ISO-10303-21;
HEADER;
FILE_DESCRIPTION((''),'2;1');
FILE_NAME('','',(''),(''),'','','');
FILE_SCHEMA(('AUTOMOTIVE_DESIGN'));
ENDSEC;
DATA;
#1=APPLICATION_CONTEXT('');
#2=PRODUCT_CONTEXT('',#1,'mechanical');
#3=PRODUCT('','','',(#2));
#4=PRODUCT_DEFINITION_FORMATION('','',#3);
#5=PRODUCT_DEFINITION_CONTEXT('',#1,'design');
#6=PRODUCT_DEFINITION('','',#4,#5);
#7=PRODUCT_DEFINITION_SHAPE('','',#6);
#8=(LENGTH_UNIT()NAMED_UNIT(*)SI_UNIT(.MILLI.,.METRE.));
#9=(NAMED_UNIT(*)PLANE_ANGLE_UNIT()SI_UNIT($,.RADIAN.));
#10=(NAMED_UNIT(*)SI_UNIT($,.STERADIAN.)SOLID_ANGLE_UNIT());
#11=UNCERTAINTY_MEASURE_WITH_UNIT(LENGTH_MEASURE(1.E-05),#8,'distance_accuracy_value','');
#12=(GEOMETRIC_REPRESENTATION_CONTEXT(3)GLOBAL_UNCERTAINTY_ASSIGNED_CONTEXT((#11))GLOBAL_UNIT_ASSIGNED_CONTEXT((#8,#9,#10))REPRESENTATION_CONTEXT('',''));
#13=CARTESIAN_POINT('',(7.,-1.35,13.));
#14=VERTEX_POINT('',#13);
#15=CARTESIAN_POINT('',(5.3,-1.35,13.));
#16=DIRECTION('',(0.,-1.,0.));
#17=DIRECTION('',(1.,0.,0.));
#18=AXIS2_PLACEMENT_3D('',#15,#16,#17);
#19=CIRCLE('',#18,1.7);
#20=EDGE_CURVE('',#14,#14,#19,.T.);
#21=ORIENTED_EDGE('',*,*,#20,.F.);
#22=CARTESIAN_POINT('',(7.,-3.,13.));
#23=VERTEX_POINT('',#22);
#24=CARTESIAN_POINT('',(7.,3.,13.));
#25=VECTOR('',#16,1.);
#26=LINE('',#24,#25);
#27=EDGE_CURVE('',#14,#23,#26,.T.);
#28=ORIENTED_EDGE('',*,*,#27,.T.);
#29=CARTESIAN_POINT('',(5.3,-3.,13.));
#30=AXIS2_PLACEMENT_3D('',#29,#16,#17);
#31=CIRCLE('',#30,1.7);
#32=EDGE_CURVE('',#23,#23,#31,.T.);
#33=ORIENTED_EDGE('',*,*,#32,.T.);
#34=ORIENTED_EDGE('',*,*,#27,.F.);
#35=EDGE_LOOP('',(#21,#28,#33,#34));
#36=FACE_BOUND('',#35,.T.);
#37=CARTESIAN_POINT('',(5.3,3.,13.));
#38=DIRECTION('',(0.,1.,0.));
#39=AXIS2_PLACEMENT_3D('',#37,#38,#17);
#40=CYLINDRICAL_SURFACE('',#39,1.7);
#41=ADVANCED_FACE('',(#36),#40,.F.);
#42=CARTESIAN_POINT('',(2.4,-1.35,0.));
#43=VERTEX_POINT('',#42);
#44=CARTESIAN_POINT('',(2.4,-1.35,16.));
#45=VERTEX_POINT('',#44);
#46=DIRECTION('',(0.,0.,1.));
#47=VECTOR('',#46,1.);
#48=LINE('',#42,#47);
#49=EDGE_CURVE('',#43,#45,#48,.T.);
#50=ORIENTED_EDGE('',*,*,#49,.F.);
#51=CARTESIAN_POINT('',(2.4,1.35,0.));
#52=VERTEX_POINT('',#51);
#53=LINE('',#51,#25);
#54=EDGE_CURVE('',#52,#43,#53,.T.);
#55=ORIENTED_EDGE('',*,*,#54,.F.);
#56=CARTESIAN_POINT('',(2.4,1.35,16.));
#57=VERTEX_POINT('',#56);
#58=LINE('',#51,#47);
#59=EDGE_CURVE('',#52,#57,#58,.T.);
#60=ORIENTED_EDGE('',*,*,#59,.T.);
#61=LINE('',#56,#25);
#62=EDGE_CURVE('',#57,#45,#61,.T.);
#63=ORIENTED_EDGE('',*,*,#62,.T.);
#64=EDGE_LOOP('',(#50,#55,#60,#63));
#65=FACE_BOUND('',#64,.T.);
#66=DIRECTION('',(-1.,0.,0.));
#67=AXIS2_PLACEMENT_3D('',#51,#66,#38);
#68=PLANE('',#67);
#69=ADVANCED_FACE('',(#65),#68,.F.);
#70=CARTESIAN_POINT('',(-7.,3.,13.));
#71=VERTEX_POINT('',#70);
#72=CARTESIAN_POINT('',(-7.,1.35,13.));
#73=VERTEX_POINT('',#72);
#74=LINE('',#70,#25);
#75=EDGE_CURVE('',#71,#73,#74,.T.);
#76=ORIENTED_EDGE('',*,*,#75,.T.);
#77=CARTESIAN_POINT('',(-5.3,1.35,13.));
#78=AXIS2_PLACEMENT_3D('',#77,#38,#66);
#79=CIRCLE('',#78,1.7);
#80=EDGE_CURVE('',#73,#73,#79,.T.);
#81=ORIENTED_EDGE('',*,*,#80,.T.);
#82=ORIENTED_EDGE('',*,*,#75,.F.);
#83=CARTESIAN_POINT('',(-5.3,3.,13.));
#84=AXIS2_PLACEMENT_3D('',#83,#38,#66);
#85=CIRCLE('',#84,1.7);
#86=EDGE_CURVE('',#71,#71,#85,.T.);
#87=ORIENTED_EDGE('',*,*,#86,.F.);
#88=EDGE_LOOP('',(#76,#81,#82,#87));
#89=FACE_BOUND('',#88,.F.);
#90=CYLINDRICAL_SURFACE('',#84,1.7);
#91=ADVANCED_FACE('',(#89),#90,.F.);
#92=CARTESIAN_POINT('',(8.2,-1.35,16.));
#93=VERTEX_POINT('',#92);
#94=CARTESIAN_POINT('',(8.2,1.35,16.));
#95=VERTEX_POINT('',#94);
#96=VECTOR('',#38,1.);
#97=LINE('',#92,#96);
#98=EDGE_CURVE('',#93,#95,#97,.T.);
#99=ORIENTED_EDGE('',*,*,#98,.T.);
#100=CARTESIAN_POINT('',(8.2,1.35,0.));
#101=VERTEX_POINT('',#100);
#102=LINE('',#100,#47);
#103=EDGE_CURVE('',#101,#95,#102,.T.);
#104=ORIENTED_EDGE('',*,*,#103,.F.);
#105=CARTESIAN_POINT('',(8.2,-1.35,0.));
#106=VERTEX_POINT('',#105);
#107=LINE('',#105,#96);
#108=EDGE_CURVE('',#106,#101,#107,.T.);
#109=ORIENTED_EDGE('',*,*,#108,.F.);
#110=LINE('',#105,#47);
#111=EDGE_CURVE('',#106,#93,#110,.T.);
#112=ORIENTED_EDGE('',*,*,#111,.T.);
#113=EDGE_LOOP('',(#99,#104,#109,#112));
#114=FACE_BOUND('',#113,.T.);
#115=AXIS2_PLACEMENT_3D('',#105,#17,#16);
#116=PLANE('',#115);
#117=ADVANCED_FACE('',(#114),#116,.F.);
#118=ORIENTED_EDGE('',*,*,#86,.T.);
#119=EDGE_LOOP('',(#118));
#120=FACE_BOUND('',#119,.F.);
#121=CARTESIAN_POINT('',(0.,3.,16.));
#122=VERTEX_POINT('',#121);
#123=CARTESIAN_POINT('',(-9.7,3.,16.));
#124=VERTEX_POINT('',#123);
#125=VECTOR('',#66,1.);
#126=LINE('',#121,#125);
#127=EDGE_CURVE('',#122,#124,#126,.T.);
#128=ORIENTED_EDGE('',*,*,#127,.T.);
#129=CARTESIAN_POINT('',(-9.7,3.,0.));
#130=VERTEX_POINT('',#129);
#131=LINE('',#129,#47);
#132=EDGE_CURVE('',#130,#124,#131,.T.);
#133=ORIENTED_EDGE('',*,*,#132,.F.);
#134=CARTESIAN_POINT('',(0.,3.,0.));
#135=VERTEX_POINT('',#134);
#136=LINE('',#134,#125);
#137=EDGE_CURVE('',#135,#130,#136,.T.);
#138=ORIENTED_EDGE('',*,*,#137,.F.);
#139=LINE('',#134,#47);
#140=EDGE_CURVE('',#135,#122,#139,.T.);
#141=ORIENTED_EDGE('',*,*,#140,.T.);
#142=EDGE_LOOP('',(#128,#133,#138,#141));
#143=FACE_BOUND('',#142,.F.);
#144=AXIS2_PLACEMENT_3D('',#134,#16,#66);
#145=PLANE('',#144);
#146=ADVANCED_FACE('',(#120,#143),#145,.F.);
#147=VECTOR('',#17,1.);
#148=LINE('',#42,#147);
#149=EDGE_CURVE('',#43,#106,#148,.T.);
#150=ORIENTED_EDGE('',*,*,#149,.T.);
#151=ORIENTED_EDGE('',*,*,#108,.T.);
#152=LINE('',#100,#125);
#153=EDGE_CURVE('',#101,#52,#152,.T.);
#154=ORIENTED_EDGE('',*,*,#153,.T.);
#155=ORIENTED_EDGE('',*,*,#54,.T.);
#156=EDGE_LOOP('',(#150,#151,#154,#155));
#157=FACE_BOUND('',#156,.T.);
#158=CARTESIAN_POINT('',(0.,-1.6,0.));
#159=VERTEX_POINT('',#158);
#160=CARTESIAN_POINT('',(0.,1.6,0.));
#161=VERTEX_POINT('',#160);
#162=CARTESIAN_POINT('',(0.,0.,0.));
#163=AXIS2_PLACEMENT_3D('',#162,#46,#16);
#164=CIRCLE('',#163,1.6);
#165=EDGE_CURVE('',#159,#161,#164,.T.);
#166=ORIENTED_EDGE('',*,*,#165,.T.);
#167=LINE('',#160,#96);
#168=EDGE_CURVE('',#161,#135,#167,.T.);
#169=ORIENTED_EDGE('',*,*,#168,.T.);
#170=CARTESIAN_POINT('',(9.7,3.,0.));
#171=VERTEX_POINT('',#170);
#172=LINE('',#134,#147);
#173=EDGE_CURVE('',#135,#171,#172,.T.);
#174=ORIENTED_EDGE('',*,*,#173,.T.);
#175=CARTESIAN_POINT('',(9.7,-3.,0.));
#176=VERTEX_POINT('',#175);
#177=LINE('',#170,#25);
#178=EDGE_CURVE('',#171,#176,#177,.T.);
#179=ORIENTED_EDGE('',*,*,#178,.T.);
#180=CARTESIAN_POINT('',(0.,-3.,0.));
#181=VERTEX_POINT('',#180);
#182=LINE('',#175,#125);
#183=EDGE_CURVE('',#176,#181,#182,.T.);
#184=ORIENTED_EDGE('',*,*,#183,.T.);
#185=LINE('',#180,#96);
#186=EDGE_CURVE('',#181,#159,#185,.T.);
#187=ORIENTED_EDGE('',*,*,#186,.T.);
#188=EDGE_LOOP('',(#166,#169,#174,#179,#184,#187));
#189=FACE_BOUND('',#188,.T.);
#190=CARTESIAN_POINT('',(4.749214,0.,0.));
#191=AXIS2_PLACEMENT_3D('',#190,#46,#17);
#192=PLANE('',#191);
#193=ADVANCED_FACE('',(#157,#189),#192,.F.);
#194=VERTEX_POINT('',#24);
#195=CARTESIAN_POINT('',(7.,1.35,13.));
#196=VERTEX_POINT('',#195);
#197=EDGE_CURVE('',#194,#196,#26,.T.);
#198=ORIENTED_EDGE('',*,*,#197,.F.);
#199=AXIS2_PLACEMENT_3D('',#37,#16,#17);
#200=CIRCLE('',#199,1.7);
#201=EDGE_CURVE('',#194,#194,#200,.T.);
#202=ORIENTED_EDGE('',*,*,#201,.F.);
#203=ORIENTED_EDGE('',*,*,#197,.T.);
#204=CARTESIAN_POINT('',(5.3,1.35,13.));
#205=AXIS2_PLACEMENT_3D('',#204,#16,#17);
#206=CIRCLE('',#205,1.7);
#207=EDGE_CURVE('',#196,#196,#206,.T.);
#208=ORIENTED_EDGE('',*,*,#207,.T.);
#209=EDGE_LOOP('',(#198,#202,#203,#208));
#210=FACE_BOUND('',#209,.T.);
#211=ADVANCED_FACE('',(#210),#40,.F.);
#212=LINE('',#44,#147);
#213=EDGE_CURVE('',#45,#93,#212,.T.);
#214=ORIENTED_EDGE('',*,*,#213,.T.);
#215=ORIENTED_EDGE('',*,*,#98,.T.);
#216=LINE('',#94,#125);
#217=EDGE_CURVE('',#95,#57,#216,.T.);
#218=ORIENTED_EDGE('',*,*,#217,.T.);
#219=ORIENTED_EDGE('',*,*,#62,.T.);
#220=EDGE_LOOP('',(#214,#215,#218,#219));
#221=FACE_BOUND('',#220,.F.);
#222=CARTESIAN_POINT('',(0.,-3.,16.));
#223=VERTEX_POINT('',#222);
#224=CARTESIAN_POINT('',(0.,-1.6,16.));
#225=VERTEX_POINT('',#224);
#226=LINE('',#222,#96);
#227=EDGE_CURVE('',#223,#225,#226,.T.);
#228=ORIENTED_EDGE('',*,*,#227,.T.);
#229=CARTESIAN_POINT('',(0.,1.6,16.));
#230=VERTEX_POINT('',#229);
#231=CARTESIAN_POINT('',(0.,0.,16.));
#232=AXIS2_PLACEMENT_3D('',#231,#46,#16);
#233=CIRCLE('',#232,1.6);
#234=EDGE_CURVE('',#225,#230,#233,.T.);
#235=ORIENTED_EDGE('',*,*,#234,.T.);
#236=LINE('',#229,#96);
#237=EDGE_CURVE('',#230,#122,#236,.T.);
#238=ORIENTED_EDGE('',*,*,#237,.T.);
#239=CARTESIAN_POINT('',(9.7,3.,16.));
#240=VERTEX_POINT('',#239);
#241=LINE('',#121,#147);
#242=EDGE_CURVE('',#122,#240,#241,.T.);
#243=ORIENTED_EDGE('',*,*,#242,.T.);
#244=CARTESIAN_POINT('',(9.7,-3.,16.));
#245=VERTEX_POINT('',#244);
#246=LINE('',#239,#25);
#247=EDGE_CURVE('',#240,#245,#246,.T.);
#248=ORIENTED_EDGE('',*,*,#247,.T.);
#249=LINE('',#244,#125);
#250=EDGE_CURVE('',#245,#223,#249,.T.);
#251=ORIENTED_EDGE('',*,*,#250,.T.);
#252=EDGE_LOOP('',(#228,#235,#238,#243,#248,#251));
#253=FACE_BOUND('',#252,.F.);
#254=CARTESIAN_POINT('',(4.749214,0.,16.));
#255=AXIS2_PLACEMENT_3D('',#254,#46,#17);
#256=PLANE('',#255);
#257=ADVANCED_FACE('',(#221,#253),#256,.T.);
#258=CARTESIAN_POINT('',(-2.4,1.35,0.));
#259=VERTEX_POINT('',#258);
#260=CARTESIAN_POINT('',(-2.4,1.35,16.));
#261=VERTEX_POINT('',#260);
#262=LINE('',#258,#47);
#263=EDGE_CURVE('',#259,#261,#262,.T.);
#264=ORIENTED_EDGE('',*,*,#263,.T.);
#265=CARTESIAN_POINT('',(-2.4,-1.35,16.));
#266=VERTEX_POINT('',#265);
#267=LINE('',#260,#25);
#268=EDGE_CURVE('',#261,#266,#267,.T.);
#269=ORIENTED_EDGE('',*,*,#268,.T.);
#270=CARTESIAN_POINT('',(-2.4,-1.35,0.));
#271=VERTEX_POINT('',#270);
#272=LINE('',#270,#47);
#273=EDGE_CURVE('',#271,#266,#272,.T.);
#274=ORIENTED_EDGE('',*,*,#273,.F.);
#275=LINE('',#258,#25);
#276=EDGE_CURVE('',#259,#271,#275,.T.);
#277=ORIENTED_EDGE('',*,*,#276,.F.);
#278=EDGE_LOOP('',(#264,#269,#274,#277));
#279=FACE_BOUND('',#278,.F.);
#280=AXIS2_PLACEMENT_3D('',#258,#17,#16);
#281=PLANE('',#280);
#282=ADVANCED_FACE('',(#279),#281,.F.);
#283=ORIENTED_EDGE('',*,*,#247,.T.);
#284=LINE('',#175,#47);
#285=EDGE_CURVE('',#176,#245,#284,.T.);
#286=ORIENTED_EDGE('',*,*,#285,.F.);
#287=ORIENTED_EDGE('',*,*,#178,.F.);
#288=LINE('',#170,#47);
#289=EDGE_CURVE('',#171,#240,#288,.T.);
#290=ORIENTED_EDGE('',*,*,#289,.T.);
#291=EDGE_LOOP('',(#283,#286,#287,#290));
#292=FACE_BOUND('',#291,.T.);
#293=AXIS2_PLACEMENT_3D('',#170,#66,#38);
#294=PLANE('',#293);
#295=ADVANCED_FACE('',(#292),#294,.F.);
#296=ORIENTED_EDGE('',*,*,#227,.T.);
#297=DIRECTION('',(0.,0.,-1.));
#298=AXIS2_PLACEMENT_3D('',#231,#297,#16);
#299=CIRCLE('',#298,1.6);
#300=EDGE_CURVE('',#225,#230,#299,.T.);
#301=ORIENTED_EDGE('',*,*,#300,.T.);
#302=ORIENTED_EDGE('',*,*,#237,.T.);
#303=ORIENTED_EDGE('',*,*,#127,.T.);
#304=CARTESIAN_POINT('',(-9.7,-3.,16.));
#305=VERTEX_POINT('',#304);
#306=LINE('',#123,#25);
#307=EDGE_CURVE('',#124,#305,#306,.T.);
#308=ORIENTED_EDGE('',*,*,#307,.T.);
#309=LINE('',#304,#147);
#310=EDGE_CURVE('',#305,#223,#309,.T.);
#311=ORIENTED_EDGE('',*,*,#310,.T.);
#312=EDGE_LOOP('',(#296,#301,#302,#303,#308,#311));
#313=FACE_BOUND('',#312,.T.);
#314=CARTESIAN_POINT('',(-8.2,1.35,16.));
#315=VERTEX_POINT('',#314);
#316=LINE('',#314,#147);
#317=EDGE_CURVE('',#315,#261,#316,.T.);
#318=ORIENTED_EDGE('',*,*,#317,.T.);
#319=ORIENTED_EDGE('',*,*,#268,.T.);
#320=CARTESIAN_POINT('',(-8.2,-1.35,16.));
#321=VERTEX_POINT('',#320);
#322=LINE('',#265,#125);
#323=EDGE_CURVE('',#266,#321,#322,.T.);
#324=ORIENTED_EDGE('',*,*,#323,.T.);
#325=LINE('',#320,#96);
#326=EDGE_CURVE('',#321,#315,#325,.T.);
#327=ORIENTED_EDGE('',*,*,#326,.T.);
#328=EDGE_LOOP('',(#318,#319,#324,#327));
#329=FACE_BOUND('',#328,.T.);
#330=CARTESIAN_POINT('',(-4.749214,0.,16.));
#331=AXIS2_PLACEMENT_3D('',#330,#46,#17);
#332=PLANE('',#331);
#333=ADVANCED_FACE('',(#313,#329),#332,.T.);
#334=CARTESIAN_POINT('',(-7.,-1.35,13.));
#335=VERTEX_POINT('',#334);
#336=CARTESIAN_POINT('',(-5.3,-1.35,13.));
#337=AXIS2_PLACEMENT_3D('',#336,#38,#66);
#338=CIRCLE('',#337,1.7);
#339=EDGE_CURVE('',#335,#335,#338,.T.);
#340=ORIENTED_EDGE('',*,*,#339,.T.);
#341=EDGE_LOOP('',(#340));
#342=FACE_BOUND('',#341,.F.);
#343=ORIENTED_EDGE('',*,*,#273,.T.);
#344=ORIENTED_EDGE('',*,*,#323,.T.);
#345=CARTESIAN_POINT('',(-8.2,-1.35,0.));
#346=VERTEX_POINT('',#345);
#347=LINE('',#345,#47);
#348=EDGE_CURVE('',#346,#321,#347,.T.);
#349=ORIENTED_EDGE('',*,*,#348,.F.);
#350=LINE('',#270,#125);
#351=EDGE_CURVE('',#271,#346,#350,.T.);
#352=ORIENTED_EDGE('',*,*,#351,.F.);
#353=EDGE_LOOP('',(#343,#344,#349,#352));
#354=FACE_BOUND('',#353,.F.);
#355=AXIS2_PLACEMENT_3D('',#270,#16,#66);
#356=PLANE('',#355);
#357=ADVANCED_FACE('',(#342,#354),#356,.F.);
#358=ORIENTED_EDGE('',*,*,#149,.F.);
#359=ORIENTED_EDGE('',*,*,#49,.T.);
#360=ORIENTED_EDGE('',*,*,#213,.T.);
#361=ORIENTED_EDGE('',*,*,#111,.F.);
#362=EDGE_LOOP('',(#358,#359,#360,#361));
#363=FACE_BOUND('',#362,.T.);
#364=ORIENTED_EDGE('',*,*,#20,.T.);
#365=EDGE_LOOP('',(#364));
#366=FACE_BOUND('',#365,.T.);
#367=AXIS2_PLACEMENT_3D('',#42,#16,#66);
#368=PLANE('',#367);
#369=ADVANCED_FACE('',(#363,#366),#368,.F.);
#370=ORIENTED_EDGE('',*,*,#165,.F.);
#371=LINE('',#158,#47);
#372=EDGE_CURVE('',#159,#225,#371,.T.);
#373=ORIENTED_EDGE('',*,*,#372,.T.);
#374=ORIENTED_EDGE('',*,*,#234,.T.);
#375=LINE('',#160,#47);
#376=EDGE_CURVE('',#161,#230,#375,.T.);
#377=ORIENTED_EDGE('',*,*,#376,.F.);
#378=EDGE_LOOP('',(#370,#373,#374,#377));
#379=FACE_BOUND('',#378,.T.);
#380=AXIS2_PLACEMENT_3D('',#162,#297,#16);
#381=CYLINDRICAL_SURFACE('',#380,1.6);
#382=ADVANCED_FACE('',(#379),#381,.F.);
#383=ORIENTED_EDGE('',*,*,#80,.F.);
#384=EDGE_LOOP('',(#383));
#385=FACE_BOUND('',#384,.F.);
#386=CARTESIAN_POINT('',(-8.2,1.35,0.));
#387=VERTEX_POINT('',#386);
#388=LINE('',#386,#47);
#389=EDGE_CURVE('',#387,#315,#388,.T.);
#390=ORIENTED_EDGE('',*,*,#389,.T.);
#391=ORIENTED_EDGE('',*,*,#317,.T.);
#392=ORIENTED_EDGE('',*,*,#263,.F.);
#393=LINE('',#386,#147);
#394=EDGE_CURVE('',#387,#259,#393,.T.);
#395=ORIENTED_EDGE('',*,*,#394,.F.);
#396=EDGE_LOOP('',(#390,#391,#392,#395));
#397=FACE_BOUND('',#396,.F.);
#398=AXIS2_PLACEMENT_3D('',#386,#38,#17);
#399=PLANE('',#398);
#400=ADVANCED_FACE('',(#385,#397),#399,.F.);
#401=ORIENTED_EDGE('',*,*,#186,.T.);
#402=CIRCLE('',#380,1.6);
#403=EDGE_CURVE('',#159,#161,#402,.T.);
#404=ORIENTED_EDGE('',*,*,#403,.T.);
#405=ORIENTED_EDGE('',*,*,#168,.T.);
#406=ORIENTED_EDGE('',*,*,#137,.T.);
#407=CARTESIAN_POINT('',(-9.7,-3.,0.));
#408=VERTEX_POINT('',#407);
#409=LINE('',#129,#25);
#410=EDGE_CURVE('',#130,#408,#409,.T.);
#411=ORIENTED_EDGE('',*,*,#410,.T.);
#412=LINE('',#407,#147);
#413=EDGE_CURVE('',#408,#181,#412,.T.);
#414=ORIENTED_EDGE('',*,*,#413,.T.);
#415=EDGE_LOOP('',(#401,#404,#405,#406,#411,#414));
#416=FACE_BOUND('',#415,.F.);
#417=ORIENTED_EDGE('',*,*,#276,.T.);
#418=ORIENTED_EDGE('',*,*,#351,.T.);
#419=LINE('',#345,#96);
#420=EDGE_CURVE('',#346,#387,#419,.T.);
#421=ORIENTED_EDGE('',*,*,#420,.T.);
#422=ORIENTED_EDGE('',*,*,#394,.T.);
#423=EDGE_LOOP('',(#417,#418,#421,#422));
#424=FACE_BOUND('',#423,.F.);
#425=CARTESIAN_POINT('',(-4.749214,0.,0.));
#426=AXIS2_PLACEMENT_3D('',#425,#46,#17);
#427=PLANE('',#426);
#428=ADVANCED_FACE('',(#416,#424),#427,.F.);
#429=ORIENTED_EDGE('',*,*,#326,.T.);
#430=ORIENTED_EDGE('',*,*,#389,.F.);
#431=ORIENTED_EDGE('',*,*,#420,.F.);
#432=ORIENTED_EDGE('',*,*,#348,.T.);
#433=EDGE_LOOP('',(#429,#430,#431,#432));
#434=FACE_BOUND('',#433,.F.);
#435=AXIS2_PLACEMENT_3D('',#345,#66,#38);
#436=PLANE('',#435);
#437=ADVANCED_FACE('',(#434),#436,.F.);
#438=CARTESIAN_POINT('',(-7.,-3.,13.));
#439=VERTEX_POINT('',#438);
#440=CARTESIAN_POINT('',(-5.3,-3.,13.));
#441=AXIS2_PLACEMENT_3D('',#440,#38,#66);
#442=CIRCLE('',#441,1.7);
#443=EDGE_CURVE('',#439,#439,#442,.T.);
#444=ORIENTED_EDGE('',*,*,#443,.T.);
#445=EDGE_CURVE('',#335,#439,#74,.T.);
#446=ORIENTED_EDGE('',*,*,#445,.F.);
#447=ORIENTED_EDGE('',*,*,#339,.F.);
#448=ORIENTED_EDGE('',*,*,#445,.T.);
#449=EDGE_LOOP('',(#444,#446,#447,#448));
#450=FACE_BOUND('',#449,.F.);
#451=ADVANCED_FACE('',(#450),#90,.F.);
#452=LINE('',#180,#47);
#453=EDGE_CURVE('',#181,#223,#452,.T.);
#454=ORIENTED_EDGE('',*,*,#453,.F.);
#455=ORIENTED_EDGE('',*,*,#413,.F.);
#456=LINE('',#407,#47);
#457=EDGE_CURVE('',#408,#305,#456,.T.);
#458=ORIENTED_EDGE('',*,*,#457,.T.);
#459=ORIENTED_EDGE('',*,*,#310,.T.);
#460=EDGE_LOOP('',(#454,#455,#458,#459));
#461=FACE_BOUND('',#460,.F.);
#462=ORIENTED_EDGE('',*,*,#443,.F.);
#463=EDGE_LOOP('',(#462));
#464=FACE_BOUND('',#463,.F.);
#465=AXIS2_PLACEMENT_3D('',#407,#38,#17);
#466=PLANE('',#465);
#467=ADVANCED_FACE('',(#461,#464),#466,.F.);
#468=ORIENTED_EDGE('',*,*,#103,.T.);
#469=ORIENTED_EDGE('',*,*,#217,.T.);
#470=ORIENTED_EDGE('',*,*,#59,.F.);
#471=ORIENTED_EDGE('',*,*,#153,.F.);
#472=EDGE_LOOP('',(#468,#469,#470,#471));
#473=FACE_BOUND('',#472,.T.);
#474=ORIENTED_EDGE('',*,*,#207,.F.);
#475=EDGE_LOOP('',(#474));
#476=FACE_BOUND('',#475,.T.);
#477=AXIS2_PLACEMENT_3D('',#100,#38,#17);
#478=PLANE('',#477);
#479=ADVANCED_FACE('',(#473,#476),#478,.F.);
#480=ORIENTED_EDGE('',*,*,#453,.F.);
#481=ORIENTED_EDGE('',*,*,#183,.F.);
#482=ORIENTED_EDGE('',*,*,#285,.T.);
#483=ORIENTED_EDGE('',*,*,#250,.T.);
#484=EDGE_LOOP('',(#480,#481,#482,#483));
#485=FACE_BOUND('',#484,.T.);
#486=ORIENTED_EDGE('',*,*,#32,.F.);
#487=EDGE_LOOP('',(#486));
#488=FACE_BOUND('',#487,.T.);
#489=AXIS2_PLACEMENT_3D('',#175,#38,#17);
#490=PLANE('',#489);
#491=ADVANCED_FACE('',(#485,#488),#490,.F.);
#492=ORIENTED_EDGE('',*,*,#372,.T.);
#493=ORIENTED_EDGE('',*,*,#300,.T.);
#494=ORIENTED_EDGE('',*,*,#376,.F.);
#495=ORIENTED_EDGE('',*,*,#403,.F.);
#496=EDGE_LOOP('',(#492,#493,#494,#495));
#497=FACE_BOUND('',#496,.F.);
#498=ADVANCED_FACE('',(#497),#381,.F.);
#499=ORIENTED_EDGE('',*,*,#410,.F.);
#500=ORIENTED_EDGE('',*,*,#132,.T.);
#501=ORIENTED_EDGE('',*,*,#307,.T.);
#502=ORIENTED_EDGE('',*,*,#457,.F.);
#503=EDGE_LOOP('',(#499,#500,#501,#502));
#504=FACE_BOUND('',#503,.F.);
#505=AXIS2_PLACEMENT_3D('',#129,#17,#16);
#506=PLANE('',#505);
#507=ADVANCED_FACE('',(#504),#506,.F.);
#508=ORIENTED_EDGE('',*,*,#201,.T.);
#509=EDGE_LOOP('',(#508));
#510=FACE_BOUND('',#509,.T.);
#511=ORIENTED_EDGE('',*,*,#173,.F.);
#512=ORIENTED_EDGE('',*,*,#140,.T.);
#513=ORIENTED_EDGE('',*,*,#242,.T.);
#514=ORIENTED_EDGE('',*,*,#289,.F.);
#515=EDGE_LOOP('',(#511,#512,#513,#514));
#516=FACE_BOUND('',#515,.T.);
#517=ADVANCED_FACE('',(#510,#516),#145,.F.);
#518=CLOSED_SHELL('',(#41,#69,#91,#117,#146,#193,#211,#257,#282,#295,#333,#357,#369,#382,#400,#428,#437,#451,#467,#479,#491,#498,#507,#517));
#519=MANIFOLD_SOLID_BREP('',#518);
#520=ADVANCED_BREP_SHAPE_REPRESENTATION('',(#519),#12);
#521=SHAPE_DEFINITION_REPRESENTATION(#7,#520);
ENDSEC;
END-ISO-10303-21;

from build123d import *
from build123d import SkipClean  # not in build123d's __all__

# Parameters (mm, degrees)
F1_DEPTH = 16
F2_R     = 1.7
F3_DEPTH = 25


with BuildPart() as f1:
    # F0 (on Top) → F1 (new body)
    with BuildSketch(Plane.XY):
        with BuildLine():
            ThreePointArc((0, -1.6), (-1.6, 0), (0, 1.6))
            Line((0, 1.6), (0, 3))
            Line((0, 3), (-9.7, 3))
            Line((-9.7, 3), (-9.7, 0))
            Line((-9.7, 0), (-9.7, -3))
            Line((-9.7, -3), (0, -3))
            Line((0, -3), (0, -1.6))
        make_face()
        Polygon((-8.2, -1.35), (-8.2, 0), (-8.2, 1.35), (-2.4, 1.35), (-2.4, -1.35), align=None, mode=Mode.SUBTRACT)
    extrude(amount=F1_DEPTH)

    # F2 (on face) → F3 (cut)
    with BuildSketch(Plane(origin=(0, 3, 0), x_dir=(-1, 0, 0), z_dir=(0, 1, 0))):
        with Locations((5.3, 13)):
            Circle(F2_R)
    extrude(amount=-F3_DEPTH, mode=Mode.SUBTRACT)

    # F4: F1 across plane


with BuildPart() as f1_1:
    add(f1.part, clean=False)
    with SkipClean():  # cleaning this boolean's faces spoils the solid; the shape is the same uncleaned
        add(f1.part.mirror(Plane.YZ), clean=False)


solid = f1_1.part
